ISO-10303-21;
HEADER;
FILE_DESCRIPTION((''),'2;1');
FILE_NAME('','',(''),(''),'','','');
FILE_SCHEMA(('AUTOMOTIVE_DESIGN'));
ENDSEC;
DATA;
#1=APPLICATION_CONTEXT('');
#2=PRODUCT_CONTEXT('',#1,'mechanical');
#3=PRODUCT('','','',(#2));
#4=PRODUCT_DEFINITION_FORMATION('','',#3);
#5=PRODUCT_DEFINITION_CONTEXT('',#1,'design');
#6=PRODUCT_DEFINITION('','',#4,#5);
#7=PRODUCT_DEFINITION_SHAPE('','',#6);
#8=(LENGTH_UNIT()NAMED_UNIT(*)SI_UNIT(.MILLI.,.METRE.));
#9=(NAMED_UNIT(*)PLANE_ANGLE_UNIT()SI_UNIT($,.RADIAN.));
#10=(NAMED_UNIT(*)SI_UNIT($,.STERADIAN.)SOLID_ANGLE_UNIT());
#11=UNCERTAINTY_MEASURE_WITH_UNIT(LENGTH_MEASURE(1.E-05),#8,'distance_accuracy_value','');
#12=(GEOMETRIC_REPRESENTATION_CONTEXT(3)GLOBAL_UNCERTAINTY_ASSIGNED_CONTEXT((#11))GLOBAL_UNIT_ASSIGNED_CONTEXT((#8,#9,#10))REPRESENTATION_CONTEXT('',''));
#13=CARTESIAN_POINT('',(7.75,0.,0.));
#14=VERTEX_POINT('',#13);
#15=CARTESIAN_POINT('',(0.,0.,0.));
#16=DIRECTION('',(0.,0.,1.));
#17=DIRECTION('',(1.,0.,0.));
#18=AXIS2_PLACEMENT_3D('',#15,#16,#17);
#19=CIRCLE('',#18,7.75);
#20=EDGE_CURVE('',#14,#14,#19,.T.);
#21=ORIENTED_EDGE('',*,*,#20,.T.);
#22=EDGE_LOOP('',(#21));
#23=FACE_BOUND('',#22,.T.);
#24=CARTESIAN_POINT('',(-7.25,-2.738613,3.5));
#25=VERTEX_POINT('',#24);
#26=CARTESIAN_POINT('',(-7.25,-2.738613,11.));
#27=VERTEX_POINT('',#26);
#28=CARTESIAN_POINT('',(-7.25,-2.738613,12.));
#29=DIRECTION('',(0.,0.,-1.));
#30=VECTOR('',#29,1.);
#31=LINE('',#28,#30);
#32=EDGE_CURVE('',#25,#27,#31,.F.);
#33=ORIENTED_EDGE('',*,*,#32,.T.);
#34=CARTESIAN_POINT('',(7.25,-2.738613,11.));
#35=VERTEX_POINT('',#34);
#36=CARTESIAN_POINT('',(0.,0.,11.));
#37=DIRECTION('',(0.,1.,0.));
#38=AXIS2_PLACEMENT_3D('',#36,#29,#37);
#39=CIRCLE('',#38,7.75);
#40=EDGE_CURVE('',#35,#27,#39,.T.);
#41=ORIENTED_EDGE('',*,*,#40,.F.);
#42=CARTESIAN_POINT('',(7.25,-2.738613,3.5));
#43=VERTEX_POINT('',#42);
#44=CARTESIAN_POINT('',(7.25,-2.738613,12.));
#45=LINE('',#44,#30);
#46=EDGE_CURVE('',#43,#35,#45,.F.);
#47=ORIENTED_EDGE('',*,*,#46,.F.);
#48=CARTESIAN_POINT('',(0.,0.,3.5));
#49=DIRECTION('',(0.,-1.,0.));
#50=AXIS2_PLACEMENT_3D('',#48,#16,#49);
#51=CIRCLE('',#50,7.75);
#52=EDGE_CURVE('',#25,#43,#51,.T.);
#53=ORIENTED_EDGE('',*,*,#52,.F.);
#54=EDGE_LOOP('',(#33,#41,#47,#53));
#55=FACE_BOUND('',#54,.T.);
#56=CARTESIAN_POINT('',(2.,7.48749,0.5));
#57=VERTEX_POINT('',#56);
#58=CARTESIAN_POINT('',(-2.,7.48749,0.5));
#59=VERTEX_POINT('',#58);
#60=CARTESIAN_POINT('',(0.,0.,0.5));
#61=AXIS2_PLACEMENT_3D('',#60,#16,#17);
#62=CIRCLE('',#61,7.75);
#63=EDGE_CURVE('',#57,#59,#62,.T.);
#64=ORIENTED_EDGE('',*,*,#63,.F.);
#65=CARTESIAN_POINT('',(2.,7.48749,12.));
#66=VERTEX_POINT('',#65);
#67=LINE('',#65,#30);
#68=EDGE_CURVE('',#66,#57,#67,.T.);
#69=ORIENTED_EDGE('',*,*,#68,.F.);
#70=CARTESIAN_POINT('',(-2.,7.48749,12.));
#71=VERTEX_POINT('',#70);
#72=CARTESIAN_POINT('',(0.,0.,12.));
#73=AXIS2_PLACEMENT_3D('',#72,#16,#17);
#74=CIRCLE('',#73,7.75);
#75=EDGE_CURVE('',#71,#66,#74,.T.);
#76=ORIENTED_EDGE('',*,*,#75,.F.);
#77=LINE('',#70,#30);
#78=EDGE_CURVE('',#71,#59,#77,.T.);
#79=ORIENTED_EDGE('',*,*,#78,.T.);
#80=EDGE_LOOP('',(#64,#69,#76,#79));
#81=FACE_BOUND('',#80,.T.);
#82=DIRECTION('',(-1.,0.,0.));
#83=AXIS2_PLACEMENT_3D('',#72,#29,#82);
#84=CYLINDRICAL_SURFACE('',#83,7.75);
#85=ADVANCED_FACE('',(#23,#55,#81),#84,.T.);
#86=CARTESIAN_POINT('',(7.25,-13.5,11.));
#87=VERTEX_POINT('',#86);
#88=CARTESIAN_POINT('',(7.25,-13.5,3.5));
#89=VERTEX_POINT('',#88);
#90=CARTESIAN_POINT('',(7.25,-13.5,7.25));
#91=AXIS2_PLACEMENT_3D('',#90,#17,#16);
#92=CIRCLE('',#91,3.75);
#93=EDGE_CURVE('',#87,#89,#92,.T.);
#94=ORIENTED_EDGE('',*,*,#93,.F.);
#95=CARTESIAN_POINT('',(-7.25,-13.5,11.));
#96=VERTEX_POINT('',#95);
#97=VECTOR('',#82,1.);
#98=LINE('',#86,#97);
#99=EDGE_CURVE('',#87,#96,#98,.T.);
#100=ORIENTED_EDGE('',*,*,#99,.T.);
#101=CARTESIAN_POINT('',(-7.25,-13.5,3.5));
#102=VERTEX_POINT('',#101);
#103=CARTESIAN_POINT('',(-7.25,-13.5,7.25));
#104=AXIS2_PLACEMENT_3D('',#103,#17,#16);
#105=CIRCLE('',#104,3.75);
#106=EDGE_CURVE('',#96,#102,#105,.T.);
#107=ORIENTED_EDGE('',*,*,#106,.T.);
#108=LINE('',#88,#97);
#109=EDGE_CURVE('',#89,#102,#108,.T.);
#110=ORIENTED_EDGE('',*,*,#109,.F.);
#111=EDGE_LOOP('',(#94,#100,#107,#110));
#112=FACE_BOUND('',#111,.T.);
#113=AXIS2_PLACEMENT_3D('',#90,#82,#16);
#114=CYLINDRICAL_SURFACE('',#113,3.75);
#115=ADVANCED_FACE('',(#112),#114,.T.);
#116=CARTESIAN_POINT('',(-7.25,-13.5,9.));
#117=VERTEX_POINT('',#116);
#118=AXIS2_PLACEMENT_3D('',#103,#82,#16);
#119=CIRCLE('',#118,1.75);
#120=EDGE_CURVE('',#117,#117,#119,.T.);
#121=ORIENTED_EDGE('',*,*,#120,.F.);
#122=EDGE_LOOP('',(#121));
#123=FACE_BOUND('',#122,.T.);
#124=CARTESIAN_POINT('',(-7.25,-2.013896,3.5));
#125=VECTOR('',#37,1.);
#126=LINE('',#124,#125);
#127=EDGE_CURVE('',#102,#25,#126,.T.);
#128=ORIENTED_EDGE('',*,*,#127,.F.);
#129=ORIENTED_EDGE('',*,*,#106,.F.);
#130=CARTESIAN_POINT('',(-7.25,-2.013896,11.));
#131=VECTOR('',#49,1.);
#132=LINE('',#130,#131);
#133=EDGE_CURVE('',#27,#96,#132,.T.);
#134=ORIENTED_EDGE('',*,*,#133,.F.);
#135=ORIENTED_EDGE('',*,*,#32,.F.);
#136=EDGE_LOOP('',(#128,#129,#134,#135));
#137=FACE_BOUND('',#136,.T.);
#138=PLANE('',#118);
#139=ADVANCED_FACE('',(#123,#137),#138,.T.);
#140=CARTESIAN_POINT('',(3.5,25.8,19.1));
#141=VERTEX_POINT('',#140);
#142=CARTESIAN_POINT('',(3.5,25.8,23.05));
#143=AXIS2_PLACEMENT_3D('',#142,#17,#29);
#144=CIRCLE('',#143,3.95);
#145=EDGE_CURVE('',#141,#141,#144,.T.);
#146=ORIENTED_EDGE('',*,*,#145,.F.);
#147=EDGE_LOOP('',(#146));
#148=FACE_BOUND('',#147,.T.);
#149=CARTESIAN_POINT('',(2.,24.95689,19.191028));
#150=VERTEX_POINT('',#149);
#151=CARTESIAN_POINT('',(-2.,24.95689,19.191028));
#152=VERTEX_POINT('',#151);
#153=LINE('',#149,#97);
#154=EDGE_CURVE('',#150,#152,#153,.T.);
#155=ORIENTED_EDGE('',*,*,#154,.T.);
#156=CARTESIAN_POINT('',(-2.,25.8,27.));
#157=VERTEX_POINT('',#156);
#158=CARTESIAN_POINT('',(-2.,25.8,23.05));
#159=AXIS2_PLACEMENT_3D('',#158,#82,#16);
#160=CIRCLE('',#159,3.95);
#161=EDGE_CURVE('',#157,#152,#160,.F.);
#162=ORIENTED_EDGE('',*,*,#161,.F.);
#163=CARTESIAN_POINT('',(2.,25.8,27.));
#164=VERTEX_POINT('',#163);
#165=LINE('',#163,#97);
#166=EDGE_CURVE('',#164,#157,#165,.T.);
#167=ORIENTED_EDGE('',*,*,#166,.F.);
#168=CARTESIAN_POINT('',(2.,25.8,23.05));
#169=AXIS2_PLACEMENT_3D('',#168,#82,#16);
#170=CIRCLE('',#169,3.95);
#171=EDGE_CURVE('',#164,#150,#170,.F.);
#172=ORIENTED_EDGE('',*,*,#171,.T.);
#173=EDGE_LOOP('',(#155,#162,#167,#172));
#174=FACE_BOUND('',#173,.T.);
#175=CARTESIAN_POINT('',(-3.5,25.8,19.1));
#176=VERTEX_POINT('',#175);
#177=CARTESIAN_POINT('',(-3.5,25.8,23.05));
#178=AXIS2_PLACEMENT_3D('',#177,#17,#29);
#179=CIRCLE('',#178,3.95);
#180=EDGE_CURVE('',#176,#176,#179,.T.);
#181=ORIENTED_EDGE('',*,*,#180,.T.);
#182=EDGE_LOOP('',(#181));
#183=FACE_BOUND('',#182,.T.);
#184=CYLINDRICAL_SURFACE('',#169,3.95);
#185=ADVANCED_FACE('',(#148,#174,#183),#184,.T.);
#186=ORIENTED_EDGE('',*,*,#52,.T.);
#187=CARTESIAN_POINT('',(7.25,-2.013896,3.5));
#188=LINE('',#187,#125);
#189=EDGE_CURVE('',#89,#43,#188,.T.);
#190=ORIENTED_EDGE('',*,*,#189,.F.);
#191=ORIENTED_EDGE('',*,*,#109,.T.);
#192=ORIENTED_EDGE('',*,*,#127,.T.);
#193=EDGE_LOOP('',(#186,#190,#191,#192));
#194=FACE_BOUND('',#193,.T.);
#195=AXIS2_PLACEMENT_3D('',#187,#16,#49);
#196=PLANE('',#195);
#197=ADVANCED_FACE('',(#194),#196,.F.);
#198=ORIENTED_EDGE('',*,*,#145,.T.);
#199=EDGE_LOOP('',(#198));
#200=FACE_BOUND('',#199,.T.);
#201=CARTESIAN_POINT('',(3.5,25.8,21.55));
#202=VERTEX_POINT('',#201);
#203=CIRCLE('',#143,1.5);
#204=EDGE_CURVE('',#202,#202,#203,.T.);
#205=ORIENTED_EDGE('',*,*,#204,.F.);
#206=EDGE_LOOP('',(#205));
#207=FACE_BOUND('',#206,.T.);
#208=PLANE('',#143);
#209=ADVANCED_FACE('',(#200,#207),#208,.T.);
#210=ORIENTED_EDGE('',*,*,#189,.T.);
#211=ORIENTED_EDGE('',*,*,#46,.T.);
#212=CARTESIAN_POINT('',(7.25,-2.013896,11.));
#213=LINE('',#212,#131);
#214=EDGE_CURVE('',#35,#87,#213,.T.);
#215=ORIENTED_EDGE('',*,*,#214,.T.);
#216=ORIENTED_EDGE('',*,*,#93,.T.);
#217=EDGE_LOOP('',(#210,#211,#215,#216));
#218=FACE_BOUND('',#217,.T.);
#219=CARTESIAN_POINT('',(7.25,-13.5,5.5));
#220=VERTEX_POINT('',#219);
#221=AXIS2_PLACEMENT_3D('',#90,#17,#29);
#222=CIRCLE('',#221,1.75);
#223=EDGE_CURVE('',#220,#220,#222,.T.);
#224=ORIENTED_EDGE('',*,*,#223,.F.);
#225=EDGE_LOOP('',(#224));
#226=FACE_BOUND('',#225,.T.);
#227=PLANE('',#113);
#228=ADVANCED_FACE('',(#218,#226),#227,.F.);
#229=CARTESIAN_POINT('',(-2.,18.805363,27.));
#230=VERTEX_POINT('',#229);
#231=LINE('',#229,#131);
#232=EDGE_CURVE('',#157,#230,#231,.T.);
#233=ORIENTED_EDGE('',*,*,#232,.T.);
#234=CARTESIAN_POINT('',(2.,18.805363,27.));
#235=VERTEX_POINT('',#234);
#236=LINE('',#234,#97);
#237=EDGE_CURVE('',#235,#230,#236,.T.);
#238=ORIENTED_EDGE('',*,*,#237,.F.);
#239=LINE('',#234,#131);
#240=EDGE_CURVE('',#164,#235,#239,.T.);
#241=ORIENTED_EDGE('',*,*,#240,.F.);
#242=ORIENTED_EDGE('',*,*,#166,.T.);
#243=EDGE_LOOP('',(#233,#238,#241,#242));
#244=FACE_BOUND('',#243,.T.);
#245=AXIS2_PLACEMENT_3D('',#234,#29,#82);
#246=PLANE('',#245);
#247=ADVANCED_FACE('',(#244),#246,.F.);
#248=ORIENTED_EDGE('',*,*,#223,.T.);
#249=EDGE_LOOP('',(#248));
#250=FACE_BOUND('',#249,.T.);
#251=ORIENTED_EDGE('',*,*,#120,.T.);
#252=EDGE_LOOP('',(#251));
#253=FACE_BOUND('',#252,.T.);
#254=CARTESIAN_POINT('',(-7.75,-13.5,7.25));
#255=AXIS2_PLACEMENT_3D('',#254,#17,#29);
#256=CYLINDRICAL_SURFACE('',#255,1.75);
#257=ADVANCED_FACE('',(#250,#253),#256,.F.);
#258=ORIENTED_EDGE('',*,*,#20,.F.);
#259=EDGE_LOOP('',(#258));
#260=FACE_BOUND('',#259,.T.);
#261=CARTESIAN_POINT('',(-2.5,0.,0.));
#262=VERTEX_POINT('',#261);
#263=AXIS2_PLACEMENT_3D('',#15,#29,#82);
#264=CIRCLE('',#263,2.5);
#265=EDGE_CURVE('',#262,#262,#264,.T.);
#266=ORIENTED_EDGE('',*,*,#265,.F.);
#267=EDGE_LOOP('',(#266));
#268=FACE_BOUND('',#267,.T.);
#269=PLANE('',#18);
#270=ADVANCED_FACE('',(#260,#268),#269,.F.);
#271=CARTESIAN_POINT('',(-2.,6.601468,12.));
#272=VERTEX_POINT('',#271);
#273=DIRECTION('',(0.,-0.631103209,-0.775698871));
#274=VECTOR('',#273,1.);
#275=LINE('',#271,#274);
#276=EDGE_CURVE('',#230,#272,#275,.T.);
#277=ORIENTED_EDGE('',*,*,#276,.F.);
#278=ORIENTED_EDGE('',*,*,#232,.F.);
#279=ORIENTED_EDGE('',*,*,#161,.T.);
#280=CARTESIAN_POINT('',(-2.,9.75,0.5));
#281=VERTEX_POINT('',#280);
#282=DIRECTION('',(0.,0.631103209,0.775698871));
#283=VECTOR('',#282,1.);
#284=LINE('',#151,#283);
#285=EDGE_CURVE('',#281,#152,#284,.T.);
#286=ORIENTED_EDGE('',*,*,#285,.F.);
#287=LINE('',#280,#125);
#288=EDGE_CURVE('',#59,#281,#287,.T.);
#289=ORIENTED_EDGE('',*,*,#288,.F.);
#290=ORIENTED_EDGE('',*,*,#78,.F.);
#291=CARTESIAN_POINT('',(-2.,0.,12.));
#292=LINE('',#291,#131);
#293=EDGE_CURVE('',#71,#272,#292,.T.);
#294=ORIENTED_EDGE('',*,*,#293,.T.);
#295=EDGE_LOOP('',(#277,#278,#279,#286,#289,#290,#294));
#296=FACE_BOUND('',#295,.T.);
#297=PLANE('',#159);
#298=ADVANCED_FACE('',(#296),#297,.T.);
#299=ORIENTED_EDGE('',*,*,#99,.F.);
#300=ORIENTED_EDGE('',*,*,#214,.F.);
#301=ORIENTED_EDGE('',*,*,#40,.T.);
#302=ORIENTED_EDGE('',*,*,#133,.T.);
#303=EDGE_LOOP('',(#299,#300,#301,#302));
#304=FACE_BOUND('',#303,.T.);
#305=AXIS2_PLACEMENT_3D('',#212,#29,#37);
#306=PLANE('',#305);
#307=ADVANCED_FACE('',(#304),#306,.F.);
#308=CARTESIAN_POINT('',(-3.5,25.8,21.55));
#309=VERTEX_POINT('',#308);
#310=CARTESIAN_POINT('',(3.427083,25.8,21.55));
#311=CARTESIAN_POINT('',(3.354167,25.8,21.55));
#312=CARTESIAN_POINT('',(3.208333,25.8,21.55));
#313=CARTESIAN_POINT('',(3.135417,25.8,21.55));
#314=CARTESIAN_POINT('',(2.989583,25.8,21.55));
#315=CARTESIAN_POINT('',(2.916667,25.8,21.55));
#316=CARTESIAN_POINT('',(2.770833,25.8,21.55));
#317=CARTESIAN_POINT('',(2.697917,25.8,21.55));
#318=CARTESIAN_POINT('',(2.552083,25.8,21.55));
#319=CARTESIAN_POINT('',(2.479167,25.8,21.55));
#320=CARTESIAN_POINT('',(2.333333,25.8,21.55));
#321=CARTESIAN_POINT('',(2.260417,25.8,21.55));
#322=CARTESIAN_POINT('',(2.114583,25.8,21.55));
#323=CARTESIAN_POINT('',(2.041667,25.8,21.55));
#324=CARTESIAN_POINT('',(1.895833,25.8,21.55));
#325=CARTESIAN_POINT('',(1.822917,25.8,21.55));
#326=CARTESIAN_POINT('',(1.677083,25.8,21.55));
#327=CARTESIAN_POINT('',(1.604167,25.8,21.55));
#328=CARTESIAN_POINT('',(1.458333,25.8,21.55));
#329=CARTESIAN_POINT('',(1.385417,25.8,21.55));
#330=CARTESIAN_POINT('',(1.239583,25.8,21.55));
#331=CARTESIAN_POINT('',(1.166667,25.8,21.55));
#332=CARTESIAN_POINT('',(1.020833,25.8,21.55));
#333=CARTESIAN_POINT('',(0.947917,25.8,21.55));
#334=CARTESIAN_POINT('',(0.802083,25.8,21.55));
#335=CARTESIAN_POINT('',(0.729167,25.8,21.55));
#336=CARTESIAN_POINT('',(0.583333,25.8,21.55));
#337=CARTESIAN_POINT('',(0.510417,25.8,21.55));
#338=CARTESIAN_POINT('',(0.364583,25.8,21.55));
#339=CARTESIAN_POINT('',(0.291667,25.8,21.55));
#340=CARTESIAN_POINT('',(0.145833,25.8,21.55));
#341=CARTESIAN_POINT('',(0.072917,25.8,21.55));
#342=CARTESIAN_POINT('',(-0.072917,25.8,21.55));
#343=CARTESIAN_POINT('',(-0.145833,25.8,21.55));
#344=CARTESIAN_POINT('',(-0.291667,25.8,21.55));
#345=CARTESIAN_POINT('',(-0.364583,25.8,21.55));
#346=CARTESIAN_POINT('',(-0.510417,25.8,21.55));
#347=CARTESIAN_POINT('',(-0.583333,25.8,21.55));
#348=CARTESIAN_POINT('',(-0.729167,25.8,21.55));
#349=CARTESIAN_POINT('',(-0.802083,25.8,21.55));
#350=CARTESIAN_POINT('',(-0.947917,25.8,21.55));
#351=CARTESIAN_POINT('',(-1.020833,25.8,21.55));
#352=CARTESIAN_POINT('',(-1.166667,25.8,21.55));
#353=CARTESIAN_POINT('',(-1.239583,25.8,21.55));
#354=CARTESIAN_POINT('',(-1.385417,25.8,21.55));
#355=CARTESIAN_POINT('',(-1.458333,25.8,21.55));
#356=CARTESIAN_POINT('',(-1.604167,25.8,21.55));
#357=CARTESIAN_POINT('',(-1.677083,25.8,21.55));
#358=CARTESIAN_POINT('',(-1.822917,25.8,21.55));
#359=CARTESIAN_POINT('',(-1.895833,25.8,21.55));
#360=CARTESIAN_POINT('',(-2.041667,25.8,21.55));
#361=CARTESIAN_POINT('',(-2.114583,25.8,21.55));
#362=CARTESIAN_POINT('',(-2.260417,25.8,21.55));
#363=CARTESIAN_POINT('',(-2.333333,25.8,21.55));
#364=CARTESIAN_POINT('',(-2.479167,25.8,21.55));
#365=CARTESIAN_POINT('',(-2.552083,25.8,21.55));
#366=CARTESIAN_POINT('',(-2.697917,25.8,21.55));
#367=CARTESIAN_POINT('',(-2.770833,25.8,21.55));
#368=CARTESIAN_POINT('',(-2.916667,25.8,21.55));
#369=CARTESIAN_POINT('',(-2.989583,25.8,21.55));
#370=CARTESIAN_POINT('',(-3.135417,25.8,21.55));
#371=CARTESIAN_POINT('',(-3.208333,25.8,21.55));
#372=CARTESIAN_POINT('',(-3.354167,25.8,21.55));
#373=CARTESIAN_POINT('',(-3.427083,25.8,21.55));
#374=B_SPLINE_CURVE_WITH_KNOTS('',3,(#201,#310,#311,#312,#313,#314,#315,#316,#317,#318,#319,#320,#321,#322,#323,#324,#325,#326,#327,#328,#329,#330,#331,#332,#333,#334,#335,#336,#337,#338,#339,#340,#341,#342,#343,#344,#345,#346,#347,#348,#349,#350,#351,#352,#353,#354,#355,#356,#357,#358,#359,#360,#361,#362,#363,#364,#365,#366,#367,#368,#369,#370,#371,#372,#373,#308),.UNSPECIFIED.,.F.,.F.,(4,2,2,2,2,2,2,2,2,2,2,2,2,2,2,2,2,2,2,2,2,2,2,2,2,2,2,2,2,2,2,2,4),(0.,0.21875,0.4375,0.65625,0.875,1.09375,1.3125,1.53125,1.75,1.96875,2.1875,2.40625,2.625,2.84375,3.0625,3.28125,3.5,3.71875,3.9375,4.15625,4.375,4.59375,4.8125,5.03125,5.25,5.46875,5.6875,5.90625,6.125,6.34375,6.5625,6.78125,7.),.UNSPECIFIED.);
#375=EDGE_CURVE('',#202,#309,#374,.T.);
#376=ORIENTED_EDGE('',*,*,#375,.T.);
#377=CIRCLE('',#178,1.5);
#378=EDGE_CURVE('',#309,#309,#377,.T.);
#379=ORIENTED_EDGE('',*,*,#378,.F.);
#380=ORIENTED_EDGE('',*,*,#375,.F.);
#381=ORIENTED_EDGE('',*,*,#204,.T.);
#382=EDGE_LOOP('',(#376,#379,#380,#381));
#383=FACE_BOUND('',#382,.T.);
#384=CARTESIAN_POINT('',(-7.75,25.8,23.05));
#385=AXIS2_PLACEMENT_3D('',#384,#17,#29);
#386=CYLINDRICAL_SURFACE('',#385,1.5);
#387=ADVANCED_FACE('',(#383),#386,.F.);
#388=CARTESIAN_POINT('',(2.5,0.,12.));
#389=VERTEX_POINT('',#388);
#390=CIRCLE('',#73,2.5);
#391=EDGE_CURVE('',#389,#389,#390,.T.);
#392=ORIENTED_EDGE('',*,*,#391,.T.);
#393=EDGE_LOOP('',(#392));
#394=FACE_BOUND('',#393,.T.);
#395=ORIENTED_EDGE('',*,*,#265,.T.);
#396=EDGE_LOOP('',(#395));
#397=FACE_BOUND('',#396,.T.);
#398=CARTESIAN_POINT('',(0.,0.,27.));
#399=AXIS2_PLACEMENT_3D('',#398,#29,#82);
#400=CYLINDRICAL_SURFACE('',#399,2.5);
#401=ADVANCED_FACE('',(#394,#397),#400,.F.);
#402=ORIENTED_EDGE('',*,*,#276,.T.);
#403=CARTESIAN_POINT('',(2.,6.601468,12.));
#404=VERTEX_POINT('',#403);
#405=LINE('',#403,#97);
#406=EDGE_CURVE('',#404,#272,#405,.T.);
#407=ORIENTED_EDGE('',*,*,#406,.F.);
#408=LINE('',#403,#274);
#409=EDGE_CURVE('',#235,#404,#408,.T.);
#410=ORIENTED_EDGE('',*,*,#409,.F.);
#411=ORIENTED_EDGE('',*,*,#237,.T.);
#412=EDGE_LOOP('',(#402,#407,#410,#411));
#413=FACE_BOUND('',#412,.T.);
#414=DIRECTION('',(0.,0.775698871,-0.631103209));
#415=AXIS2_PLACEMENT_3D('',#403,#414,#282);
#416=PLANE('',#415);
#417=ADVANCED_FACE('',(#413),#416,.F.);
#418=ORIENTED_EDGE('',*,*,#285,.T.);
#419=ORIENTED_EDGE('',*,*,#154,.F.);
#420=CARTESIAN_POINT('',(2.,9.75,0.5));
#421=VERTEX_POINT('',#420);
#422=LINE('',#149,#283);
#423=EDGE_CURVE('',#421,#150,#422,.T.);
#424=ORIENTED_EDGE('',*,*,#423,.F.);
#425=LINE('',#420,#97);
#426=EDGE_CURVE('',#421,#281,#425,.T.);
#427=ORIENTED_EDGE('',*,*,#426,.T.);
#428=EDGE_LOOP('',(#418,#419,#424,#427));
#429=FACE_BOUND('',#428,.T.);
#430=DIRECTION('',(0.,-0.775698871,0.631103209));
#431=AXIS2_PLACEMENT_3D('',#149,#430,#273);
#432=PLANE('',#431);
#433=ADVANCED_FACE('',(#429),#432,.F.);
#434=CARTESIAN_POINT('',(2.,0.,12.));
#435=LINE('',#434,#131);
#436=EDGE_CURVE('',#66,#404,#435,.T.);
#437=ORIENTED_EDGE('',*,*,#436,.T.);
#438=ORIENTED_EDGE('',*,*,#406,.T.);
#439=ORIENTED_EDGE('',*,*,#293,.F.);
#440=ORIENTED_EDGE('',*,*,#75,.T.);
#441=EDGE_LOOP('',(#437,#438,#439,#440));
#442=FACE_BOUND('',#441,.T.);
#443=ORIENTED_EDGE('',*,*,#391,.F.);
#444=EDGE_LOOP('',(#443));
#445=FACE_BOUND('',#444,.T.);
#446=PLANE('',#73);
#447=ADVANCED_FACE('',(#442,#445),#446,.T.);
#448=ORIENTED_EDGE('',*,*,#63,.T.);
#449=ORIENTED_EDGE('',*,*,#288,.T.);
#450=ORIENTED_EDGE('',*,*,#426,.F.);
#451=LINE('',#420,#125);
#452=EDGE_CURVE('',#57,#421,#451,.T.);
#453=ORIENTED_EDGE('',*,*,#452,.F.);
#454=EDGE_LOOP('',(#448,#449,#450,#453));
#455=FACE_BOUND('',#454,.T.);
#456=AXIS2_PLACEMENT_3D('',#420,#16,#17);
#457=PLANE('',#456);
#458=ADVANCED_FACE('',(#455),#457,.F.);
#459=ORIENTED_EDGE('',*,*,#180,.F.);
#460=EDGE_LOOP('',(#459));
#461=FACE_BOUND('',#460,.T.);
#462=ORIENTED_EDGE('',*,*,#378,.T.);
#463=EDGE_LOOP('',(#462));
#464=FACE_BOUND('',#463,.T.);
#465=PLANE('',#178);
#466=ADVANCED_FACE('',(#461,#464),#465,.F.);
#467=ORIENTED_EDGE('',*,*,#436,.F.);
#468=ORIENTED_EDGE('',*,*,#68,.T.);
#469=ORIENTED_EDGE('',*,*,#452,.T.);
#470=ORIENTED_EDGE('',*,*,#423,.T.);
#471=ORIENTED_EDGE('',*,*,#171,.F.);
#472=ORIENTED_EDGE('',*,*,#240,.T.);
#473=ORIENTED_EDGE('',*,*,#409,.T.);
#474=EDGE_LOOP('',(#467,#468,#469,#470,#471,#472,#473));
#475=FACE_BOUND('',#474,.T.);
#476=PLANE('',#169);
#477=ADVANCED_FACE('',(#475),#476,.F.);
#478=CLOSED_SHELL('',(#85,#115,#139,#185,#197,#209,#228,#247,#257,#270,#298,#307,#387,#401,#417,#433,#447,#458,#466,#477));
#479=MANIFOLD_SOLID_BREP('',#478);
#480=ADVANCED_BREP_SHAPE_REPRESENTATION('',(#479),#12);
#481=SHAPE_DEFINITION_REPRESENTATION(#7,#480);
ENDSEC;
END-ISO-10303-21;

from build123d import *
from build123d.topology import SkipClean

# Parameters (mm, degrees)
SKETCH1_R            = 7.75
MAIN_CYLINDER_DEPTH  = 12
DROP_DEPTH           = 7.25
RISER_DEPTH          = 2
SKETCH5_R            = 3.95
RISER_BOSS_DEPTH     = 3.5
TOP_HOLES_DEPTH      = 42.720798171
TOP_HOLES_DEPTH_BACK = 42.720798171
SKETCH6_R            = 1.5
SKETCH7_R            = 1.75
BOTTOM_HOLES_DEPTH   = 43.884291996
SKETCH8_R            = 2.5
BEARING_HOLE_DEPTH   = 41.916072637


with BuildPart() as part:
    # Sketch1 → Main Cylinder (new body)
    with BuildSketch(Plane.XY):
        Circle(SKETCH1_R)
    extrude(amount=MAIN_CYLINDER_DEPTH)

    # Sketch2 → Drop (add, symmetric)
    with BuildSketch(Plane(origin=(0, 0, 0), x_dir=(0, 0, -1), z_dir=(1, 0, 0))):
        with BuildLine():
            Line((-3.5, -2.013895629), (-3.5, -13.5))
            ThreePointArc((-3.5, -13.5), (-7.25, -17.25), (-11, -13.5))
            Line((-11, -13.5), (-11, -2.013895629))
            Line((-11, -2.013895629), (-3.5, -2.013895629))
        make_face()
    extrude(amount=DROP_DEPTH, both=True)

    # Sketch3 → Riser (add, symmetric)
    with BuildSketch(Plane(origin=(0, 0, 0), x_dir=(0, 0, -1), z_dir=(1, 0, 0))):
        with BuildLine():
            Line((-27, 18.805363243), (-27, 25.8))
            ThreePointArc((-27, 25.8), (-22.625995284, 29.727177103), (-19.191027848, 24.956890322))
            Line((-19.191027848, 24.956890322), (-0.5, 9.75))
            Line((-0.5, 9.75), (-0.5, 5.606009061))
            Line((-0.5, 5.606009061), (-12, 5.606009061))
            Line((-12, 5.606009061), (-12, 6.601467519))
            Line((-12, 6.601467519), (-27, 18.805363243))
        make_face()
    extrude(amount=RISER_DEPTH, both=True)

    # Sketch5 → Riser Boss (add, symmetric)
    with SkipClean():  # the faces are left unmerged after this step: merging them gives an invalid solid
        with BuildSketch(Plane(origin=(0, 0, 0), x_dir=(0, 0, -1), z_dir=(1, 0, 0))):
            with Locations((-23.05, 25.8)):
                Circle(SKETCH5_R)
        extrude(amount=RISER_BOSS_DEPTH, both=True)

    # Sketch6 → Top Holes (cut, two sides: drawn at the far end of the back side and taken through both)
    with SkipClean():  # the faces are left unmerged after this step: merging them gives an invalid solid
        with BuildSketch(Plane(origin=(3.5, 0, 0), x_dir=(0, 0, -1), z_dir=(1, 0, 0)).offset(-TOP_HOLES_DEPTH_BACK)):
            with Locations((-23.05, 25.8)):
                Circle(SKETCH6_R)
        extrude(amount=TOP_HOLES_DEPTH + TOP_HOLES_DEPTH_BACK, mode=Mode.SUBTRACT)

    # Sketch7 → Bottom Holes (cut, through all)
    with SkipClean():  # the faces are left unmerged after this step: merging them gives an invalid solid
        with BuildSketch(Plane(origin=(7.25, 0, 0), x_dir=(0, 0, -1), z_dir=(1, 0, 0))):
            with Locations((-7.25, -13.5)):
                Circle(SKETCH7_R)
        extrude(amount=-BOTTOM_HOLES_DEPTH, mode=Mode.SUBTRACT)

    # Sketch8 → Bearing Hole (cut, through all)
    with SkipClean():  # the faces are left unmerged after this step: merging them gives an invalid solid
        with BuildSketch(Plane(origin=(0, 0, 0), x_dir=(-1, 0, 0), z_dir=(0, 0, -1))):
            Circle(SKETCH8_R)
        extrude(amount=-BEARING_HOLE_DEPTH, mode=Mode.SUBTRACT)


solid = part.part
